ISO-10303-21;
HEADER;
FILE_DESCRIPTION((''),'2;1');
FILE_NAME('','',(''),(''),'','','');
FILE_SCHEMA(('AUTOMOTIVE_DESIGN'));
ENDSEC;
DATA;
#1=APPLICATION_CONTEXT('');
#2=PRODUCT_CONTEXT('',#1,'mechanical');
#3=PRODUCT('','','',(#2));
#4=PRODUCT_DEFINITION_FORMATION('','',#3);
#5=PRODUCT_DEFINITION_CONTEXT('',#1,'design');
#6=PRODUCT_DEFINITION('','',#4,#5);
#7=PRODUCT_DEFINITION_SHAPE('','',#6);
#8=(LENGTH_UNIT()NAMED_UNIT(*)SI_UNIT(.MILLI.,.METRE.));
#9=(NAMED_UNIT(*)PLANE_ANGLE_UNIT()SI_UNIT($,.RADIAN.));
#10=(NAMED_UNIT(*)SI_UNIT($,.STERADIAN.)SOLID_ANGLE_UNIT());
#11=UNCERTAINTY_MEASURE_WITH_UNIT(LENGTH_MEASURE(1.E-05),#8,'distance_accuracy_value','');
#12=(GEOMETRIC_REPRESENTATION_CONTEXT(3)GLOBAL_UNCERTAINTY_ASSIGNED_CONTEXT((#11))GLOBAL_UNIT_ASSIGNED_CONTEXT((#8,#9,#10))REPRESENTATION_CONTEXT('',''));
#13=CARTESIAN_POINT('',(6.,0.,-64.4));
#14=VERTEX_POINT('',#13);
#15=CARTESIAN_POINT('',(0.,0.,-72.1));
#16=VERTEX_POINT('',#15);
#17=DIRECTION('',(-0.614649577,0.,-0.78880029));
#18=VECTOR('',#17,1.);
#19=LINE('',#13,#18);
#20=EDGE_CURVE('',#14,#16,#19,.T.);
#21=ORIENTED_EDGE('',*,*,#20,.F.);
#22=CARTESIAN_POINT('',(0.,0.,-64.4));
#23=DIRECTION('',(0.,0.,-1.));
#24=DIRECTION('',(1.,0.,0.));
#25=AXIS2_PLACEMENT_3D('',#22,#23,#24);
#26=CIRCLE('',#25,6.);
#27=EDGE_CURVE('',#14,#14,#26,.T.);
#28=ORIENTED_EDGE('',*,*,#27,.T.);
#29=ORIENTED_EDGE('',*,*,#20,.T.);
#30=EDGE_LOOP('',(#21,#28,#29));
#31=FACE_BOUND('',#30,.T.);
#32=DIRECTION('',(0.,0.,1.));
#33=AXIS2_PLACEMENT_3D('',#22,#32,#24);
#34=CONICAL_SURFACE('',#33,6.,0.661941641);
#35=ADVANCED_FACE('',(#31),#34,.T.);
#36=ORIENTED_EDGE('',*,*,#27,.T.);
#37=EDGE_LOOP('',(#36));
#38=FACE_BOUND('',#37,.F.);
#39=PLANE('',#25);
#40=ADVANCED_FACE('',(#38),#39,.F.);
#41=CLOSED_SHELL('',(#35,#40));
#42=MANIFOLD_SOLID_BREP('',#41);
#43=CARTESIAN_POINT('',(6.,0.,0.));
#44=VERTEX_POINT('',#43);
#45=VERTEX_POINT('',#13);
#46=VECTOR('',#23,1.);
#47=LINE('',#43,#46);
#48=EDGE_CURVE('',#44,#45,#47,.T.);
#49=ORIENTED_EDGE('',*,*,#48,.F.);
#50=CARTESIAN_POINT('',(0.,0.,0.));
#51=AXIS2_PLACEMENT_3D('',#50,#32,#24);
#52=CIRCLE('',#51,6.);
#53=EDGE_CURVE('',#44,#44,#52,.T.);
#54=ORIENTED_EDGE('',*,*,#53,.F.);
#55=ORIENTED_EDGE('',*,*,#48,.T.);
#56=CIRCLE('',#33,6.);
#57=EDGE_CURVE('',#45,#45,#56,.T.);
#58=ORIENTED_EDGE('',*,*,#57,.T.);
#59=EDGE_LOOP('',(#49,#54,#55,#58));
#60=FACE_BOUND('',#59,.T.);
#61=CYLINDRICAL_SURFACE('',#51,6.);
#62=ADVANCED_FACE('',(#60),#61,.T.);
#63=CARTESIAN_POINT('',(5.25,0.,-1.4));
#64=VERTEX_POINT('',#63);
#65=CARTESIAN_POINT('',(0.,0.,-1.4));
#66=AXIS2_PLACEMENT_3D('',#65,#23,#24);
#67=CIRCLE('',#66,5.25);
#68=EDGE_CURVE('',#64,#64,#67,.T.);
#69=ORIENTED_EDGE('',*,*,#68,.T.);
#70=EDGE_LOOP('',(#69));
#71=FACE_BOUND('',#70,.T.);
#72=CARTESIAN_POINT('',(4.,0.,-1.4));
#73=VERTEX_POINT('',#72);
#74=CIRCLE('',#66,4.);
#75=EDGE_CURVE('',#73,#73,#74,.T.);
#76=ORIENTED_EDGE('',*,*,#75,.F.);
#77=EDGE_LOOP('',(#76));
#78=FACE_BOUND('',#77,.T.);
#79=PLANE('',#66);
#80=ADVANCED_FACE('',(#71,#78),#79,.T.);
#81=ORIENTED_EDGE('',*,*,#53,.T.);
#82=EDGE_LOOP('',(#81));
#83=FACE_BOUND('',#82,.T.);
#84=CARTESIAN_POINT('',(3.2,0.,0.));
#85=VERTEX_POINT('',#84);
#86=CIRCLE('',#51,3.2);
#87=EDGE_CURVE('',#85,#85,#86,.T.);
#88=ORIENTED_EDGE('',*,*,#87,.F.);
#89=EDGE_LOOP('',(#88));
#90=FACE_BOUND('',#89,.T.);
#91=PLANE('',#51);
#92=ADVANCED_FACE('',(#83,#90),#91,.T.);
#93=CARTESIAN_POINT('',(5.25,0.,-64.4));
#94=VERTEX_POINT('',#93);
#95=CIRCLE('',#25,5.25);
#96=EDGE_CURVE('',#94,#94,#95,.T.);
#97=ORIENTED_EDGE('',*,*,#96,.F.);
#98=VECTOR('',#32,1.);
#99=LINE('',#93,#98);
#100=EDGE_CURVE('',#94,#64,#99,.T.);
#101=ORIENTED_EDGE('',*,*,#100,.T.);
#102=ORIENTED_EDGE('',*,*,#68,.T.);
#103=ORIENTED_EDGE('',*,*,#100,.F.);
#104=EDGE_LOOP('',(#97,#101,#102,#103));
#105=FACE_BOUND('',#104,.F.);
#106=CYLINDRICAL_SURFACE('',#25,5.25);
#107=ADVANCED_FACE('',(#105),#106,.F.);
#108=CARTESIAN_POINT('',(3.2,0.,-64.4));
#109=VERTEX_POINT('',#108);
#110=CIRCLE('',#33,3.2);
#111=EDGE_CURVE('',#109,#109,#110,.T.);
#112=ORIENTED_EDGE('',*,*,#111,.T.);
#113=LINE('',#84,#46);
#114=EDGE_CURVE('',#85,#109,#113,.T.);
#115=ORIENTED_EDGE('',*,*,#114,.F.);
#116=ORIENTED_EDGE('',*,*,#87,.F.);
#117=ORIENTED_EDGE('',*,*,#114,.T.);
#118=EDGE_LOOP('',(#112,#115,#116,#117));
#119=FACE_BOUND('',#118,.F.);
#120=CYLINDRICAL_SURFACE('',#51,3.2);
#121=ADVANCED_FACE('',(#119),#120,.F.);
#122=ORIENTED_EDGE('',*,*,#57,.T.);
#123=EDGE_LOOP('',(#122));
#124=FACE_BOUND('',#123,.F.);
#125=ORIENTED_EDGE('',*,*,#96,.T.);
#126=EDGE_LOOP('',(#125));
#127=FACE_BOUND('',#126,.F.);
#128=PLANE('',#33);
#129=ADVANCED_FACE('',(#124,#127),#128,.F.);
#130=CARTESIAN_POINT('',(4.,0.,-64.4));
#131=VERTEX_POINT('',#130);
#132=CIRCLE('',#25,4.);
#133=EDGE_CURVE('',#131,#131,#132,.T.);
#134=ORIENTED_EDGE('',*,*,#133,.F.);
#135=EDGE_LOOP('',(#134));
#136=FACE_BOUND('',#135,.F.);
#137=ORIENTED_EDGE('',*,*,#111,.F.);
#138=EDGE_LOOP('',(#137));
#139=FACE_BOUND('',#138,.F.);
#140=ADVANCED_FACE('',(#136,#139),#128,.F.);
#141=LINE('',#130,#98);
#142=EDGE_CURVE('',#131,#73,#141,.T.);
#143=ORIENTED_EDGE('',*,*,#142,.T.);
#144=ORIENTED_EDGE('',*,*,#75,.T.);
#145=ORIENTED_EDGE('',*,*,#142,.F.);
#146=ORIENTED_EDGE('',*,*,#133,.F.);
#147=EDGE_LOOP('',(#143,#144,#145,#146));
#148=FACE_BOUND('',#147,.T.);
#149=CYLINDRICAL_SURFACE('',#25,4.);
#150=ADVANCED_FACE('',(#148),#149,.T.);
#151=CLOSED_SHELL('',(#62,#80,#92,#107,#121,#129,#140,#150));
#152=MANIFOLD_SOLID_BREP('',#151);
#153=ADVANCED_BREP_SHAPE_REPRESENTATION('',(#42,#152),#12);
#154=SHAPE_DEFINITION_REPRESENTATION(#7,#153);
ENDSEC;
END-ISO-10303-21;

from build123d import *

# Parameters (mm, degrees)
F0_R     = 6
F0_R_2   = 3.2
F1_DEPTH = 64.4
F2_R     = 5.25
F2_R_2   = 4
F3_DEPTH = 63
F4_R     = 6
F4_R_2   = 5.25
F4_R_3   = 3.2
F5_DEPTH = 7.7
F6_R     = 3.2
F7_DEPTH = 7.7


# Not quite as in the source:
# - a fillet or chamfer that OpenCascade refuses, or shapes differently, is made with other operations: its cross-section is extruded or revolved along the edge and cut away or added


with BuildPart() as f1:
    # F0 (on Top) → F1 (new body)
    with BuildSketch(Plane.XY):
        Circle(F0_R)
        Circle(F0_R_2, mode=Mode.SUBTRACT)
    extrude(amount=-F1_DEPTH)

    # F2 (on face) → F3 (cut)
    with BuildSketch(Plane(origin=(0, 0, -64.4), x_dir=(1, 0, 0), z_dir=(0, 0, -1))):
        Circle(F2_R)
        Circle(F2_R_2, mode=Mode.SUBTRACT)
    extrude(amount=-F3_DEPTH, mode=Mode.SUBTRACT)


with BuildPart() as f5:
    # F4 (on face) → F5 (new body)
    with BuildSketch(Plane(origin=(0, 0, -64.4), x_dir=(1, 0, 0), z_dir=(0, 0, -1))):
        Circle(F4_R)
        Circle(F4_R_2, mode=Mode.SUBTRACT)
        Circle(F4_R_2)
        Circle(F4_R_3, mode=Mode.SUBTRACT)
    extrude(amount=F5_DEPTH)

    # F6 (on face) → F7 (join)
    with BuildSketch(Plane(origin=(0, 0, -72.1), x_dir=(1, 0, 0), z_dir=(0, 0, -1))):
        Circle(F6_R)
    extrude(amount=-F7_DEPTH)

    # F8: chamfer of 7.7 x 6 on 1 edges, made by hand

    # F8_s1 → F8_t2 (revolve, cut)
    with BuildSketch(Plane.XZ):
        Polygon((6, -64.4), (0, -72.1), (6, -72.1), align=None)
    revolve(axis=Axis((0, 0, -72.1), (0, 0, -1)), mode=Mode.SUBTRACT)


solid = Compound([f1.part, f5.part])
